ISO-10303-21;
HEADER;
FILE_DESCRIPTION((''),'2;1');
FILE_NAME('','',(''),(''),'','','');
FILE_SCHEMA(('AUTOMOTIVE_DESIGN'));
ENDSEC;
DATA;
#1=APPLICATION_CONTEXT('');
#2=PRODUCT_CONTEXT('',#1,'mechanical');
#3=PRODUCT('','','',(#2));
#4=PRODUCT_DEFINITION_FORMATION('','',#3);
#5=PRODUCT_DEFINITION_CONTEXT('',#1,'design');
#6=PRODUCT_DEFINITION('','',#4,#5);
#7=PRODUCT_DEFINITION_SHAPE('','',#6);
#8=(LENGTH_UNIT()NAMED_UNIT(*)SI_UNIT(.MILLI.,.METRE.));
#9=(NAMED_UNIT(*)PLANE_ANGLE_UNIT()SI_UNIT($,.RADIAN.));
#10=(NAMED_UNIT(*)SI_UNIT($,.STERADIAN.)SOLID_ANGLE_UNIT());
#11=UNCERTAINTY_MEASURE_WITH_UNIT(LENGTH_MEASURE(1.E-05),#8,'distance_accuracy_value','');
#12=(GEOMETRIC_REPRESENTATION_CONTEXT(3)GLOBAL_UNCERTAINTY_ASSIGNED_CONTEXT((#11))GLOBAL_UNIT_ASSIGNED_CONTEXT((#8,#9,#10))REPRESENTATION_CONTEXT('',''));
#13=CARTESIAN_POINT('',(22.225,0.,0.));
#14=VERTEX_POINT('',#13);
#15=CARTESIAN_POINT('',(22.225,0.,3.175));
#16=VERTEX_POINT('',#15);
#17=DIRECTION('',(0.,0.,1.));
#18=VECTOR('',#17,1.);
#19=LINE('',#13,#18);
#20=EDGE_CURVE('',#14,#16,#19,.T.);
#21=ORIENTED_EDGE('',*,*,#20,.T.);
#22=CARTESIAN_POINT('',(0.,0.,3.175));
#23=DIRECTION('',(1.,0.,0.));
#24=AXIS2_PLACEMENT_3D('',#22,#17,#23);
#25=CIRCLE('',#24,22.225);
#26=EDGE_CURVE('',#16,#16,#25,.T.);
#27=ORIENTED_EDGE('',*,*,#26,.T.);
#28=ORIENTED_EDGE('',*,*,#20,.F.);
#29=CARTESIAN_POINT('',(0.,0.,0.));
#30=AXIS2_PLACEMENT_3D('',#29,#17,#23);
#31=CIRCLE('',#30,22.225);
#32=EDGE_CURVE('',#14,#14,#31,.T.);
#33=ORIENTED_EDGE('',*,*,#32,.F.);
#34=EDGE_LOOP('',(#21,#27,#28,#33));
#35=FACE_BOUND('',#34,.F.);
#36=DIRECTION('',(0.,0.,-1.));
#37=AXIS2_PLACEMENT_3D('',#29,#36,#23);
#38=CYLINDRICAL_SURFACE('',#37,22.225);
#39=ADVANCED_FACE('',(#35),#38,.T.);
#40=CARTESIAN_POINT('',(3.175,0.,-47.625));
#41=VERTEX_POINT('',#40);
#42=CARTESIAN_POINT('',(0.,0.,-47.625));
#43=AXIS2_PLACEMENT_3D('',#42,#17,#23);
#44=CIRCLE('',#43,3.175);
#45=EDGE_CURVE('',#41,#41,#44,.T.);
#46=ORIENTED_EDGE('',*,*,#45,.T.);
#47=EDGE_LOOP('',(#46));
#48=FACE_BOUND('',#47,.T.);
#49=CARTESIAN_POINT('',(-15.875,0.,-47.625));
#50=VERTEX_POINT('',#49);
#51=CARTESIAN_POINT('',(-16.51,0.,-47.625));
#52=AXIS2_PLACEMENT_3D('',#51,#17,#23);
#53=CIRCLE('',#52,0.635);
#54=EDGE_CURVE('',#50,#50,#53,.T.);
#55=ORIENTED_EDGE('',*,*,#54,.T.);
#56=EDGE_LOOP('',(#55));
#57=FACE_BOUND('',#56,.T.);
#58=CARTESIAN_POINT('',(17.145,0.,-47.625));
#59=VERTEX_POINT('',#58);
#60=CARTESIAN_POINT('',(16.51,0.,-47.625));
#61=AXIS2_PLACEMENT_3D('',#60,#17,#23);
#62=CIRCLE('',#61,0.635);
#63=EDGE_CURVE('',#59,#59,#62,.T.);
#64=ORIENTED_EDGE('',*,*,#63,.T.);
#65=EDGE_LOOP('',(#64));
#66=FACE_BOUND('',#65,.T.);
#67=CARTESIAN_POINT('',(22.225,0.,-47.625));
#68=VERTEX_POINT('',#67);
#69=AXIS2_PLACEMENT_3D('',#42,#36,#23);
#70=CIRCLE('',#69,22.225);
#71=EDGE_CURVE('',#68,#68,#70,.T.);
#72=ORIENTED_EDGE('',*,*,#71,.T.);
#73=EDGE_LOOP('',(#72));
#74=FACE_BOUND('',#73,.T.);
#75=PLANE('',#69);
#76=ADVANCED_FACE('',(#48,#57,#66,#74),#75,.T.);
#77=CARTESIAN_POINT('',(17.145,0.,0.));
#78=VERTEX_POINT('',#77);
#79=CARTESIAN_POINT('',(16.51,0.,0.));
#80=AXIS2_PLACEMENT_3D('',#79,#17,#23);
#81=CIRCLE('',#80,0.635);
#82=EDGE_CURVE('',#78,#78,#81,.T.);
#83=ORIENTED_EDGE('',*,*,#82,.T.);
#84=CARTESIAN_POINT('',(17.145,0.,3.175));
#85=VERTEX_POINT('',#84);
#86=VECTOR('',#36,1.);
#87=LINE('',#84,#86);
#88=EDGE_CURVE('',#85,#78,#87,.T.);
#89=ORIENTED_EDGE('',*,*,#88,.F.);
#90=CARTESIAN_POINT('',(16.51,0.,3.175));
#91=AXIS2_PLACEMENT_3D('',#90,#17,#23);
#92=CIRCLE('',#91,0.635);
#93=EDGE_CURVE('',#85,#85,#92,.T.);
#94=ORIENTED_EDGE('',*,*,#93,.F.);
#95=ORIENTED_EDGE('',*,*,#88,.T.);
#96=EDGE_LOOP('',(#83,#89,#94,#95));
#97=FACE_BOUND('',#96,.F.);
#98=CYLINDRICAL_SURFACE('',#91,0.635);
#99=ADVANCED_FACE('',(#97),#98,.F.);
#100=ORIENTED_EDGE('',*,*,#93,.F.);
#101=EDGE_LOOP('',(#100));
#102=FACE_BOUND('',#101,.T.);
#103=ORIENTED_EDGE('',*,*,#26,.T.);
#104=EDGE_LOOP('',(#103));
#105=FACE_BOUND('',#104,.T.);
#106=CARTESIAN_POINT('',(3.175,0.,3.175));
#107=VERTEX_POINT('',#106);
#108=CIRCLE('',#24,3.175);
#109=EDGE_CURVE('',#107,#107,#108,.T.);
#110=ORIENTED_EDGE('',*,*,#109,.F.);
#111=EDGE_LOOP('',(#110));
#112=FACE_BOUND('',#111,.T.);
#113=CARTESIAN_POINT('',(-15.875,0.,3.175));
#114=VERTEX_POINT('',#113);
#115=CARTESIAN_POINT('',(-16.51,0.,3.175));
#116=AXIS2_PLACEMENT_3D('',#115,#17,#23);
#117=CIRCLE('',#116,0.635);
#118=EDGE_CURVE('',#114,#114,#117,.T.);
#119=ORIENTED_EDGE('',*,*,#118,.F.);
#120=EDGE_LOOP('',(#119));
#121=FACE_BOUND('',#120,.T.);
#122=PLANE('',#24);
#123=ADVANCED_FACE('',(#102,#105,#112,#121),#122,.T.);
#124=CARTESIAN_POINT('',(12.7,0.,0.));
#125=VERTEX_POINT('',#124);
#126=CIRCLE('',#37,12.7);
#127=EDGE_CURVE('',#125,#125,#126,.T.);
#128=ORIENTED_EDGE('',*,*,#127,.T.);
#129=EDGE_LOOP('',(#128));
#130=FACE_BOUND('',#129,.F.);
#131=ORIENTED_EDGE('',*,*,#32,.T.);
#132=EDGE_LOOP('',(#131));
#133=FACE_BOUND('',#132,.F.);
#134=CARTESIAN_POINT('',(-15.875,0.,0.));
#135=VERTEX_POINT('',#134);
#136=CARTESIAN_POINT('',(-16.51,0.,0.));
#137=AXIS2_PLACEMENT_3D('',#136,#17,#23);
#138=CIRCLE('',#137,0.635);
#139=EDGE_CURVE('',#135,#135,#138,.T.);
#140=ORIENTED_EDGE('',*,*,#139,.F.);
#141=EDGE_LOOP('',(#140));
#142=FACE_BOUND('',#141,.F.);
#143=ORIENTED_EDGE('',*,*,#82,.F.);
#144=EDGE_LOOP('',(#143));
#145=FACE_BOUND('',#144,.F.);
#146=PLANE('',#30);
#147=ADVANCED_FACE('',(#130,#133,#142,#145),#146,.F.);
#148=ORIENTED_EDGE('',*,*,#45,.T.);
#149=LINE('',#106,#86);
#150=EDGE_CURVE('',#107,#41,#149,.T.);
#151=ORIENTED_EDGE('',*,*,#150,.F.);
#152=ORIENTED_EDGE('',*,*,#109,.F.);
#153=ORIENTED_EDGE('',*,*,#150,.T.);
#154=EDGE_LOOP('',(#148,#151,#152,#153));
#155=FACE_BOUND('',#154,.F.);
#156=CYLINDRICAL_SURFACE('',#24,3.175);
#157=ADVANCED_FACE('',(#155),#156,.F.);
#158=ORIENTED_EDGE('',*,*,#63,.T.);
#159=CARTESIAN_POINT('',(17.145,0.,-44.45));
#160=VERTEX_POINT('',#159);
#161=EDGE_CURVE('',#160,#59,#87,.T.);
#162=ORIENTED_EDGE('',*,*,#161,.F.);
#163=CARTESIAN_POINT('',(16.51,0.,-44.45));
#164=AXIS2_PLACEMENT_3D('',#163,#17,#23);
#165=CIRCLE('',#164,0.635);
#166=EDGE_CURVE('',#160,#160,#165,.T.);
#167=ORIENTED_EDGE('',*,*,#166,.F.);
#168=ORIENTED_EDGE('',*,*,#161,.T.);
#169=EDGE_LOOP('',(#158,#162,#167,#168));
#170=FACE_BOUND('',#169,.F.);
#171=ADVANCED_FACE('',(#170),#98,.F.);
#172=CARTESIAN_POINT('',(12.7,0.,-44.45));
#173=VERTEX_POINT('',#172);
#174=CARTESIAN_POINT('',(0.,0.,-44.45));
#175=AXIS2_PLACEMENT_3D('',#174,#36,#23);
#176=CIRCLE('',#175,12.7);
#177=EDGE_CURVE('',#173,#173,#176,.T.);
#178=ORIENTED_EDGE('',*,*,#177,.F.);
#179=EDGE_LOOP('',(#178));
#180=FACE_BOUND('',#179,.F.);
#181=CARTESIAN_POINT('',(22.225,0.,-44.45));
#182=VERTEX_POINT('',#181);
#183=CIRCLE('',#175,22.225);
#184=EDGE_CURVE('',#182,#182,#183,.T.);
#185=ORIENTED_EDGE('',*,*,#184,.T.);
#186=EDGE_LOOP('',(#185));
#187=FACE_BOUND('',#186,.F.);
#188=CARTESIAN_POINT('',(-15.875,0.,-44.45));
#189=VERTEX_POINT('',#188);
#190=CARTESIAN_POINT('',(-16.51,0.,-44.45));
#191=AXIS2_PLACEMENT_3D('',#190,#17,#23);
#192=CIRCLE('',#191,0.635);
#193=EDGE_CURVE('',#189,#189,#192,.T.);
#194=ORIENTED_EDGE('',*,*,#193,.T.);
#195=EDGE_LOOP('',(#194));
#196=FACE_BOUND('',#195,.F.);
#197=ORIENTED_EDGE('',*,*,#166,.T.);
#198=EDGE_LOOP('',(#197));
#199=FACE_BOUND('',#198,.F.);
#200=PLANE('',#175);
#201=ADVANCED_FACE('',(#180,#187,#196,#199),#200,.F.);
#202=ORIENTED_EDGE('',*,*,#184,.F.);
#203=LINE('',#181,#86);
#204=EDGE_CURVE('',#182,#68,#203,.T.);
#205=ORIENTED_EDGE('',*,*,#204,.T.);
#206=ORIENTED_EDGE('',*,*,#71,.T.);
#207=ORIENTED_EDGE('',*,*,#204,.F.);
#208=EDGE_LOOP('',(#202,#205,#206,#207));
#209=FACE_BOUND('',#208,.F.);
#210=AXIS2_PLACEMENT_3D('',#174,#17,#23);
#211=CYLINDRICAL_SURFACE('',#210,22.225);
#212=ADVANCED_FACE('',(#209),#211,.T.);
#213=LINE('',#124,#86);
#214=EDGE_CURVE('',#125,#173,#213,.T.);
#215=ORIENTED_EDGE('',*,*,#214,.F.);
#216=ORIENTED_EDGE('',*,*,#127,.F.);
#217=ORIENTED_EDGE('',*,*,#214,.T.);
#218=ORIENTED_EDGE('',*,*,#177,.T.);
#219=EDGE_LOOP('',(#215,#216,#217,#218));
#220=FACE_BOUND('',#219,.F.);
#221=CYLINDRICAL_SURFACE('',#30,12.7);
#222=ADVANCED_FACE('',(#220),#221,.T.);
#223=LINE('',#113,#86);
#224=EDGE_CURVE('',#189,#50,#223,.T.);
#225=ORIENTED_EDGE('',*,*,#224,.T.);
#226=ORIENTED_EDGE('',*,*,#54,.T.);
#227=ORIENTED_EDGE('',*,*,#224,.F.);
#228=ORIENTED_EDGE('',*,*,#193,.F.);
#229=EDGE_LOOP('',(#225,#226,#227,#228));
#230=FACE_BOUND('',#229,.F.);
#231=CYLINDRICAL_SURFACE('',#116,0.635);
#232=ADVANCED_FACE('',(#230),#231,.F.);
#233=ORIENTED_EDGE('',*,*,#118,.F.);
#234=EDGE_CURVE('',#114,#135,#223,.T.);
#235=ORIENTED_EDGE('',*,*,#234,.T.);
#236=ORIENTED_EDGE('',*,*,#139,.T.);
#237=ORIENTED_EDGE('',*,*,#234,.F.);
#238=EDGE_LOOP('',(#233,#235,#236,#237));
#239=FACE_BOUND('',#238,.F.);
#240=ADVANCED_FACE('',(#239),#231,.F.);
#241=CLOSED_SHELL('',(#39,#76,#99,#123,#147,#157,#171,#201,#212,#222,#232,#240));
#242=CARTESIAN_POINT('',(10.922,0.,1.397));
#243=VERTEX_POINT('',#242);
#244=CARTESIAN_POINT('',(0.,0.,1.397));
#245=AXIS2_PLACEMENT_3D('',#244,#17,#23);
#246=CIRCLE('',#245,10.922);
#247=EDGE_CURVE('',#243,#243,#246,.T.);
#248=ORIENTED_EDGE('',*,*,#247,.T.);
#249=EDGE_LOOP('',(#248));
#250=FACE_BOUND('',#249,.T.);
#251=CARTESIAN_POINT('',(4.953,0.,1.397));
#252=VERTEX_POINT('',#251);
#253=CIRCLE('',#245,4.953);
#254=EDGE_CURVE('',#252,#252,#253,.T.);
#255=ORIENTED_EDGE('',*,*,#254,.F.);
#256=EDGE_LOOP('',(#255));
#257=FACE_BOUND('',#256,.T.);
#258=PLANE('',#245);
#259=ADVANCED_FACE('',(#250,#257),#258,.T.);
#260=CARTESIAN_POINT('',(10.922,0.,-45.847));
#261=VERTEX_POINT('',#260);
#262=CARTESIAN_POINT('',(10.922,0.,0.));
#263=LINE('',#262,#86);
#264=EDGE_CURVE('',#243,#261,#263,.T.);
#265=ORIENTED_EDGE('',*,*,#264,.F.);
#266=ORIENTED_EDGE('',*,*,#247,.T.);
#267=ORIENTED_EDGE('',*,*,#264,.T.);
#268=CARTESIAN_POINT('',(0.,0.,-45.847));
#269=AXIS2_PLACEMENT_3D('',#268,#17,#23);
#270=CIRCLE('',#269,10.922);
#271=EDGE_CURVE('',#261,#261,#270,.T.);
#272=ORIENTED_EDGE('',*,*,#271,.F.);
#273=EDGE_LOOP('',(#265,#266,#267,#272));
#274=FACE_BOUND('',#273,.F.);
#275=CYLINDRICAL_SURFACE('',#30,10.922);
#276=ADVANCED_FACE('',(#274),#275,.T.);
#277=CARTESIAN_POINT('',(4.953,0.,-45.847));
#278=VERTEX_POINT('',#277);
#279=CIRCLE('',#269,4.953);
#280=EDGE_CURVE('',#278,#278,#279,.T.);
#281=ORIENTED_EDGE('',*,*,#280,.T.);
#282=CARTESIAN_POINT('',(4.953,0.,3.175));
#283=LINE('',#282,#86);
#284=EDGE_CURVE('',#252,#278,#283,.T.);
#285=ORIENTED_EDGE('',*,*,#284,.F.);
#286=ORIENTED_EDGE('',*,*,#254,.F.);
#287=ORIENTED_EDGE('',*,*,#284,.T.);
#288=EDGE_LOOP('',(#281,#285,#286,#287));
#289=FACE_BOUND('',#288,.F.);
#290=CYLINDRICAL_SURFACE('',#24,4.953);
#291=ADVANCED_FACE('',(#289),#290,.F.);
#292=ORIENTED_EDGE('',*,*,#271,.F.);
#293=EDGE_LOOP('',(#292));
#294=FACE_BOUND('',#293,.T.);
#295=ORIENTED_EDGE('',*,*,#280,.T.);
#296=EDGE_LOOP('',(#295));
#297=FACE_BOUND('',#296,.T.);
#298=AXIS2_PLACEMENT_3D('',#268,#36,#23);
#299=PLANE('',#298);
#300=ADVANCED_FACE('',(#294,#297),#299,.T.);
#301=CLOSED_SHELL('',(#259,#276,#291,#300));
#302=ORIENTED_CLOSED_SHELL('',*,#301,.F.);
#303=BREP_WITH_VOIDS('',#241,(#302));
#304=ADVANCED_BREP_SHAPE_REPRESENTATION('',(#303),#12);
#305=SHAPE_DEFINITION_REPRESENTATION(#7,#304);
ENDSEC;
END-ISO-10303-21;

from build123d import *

# Parameters (mm, degrees)
F0_R     = 22.225
F1_DEPTH = 3.175
F2_R     = 12.7
F3_DEPTH = 44.45
F4_R     = 22.225
F5_DEPTH = 3.175
F6_R     = 0.635
F7_DEPTH = 50.8
F8_T     = -1.778


# Not quite as in the source:
# - a length typed as a fraction of an inch, garbled in the dataset ("3 / 203.2 mm" for 3/8 in), is restored


with BuildPart() as f1:
    # F0 (on Top) → F1 (new body)
    with BuildSketch(Plane.XY):
        Circle(F0_R)
    extrude(amount=F1_DEPTH)

    # F2 (on face) → F3 (join)
    with BuildSketch(Plane(origin=(0, 0, 0), x_dir=(1, 0, 0), z_dir=(0, 0, -1))):
        Circle(F2_R)
    extrude(amount=F3_DEPTH)

    # F4 (on face) → F5 (join)
    with BuildSketch(Plane(origin=(0, 0, -44.45), x_dir=(1, 0, 0), z_dir=(0, 0, -1))):
        Circle(F4_R)
    extrude(amount=F5_DEPTH)

    # F6 (on face) → F7 (cut, through all)
    with BuildSketch(Plane.XY.offset(3.175)):
        with BuildLine():
            ThreePointArc((-3.175, 0), (0, -3.175), (3.175, 0))
            ThreePointArc((3.175, 0), (0, 3.175), (-3.175, 0))
        make_face()
        with BuildLine():
            ThreePointArc((-17.145, 0), (-16.51, -0.635), (-15.875, 0))
            Line((-15.875, 0), (-17.145, 0))
        make_face()
        with BuildLine():
            Line((-17.145, 0), (-15.875, 0))
            ThreePointArc((-15.875, 0), (-16.51, 0.635), (-17.145, 0))
        make_face()
        with Locations((16.51, 0)):
            Circle(F6_R)
    extrude(amount=-F7_DEPTH, mode=Mode.SUBTRACT)

    # F8 (hollow: no face is removed)
    offset(amount=F8_T, kind=Kind.INTERSECTION, mode=Mode.SUBTRACT)


solid = f1.part
